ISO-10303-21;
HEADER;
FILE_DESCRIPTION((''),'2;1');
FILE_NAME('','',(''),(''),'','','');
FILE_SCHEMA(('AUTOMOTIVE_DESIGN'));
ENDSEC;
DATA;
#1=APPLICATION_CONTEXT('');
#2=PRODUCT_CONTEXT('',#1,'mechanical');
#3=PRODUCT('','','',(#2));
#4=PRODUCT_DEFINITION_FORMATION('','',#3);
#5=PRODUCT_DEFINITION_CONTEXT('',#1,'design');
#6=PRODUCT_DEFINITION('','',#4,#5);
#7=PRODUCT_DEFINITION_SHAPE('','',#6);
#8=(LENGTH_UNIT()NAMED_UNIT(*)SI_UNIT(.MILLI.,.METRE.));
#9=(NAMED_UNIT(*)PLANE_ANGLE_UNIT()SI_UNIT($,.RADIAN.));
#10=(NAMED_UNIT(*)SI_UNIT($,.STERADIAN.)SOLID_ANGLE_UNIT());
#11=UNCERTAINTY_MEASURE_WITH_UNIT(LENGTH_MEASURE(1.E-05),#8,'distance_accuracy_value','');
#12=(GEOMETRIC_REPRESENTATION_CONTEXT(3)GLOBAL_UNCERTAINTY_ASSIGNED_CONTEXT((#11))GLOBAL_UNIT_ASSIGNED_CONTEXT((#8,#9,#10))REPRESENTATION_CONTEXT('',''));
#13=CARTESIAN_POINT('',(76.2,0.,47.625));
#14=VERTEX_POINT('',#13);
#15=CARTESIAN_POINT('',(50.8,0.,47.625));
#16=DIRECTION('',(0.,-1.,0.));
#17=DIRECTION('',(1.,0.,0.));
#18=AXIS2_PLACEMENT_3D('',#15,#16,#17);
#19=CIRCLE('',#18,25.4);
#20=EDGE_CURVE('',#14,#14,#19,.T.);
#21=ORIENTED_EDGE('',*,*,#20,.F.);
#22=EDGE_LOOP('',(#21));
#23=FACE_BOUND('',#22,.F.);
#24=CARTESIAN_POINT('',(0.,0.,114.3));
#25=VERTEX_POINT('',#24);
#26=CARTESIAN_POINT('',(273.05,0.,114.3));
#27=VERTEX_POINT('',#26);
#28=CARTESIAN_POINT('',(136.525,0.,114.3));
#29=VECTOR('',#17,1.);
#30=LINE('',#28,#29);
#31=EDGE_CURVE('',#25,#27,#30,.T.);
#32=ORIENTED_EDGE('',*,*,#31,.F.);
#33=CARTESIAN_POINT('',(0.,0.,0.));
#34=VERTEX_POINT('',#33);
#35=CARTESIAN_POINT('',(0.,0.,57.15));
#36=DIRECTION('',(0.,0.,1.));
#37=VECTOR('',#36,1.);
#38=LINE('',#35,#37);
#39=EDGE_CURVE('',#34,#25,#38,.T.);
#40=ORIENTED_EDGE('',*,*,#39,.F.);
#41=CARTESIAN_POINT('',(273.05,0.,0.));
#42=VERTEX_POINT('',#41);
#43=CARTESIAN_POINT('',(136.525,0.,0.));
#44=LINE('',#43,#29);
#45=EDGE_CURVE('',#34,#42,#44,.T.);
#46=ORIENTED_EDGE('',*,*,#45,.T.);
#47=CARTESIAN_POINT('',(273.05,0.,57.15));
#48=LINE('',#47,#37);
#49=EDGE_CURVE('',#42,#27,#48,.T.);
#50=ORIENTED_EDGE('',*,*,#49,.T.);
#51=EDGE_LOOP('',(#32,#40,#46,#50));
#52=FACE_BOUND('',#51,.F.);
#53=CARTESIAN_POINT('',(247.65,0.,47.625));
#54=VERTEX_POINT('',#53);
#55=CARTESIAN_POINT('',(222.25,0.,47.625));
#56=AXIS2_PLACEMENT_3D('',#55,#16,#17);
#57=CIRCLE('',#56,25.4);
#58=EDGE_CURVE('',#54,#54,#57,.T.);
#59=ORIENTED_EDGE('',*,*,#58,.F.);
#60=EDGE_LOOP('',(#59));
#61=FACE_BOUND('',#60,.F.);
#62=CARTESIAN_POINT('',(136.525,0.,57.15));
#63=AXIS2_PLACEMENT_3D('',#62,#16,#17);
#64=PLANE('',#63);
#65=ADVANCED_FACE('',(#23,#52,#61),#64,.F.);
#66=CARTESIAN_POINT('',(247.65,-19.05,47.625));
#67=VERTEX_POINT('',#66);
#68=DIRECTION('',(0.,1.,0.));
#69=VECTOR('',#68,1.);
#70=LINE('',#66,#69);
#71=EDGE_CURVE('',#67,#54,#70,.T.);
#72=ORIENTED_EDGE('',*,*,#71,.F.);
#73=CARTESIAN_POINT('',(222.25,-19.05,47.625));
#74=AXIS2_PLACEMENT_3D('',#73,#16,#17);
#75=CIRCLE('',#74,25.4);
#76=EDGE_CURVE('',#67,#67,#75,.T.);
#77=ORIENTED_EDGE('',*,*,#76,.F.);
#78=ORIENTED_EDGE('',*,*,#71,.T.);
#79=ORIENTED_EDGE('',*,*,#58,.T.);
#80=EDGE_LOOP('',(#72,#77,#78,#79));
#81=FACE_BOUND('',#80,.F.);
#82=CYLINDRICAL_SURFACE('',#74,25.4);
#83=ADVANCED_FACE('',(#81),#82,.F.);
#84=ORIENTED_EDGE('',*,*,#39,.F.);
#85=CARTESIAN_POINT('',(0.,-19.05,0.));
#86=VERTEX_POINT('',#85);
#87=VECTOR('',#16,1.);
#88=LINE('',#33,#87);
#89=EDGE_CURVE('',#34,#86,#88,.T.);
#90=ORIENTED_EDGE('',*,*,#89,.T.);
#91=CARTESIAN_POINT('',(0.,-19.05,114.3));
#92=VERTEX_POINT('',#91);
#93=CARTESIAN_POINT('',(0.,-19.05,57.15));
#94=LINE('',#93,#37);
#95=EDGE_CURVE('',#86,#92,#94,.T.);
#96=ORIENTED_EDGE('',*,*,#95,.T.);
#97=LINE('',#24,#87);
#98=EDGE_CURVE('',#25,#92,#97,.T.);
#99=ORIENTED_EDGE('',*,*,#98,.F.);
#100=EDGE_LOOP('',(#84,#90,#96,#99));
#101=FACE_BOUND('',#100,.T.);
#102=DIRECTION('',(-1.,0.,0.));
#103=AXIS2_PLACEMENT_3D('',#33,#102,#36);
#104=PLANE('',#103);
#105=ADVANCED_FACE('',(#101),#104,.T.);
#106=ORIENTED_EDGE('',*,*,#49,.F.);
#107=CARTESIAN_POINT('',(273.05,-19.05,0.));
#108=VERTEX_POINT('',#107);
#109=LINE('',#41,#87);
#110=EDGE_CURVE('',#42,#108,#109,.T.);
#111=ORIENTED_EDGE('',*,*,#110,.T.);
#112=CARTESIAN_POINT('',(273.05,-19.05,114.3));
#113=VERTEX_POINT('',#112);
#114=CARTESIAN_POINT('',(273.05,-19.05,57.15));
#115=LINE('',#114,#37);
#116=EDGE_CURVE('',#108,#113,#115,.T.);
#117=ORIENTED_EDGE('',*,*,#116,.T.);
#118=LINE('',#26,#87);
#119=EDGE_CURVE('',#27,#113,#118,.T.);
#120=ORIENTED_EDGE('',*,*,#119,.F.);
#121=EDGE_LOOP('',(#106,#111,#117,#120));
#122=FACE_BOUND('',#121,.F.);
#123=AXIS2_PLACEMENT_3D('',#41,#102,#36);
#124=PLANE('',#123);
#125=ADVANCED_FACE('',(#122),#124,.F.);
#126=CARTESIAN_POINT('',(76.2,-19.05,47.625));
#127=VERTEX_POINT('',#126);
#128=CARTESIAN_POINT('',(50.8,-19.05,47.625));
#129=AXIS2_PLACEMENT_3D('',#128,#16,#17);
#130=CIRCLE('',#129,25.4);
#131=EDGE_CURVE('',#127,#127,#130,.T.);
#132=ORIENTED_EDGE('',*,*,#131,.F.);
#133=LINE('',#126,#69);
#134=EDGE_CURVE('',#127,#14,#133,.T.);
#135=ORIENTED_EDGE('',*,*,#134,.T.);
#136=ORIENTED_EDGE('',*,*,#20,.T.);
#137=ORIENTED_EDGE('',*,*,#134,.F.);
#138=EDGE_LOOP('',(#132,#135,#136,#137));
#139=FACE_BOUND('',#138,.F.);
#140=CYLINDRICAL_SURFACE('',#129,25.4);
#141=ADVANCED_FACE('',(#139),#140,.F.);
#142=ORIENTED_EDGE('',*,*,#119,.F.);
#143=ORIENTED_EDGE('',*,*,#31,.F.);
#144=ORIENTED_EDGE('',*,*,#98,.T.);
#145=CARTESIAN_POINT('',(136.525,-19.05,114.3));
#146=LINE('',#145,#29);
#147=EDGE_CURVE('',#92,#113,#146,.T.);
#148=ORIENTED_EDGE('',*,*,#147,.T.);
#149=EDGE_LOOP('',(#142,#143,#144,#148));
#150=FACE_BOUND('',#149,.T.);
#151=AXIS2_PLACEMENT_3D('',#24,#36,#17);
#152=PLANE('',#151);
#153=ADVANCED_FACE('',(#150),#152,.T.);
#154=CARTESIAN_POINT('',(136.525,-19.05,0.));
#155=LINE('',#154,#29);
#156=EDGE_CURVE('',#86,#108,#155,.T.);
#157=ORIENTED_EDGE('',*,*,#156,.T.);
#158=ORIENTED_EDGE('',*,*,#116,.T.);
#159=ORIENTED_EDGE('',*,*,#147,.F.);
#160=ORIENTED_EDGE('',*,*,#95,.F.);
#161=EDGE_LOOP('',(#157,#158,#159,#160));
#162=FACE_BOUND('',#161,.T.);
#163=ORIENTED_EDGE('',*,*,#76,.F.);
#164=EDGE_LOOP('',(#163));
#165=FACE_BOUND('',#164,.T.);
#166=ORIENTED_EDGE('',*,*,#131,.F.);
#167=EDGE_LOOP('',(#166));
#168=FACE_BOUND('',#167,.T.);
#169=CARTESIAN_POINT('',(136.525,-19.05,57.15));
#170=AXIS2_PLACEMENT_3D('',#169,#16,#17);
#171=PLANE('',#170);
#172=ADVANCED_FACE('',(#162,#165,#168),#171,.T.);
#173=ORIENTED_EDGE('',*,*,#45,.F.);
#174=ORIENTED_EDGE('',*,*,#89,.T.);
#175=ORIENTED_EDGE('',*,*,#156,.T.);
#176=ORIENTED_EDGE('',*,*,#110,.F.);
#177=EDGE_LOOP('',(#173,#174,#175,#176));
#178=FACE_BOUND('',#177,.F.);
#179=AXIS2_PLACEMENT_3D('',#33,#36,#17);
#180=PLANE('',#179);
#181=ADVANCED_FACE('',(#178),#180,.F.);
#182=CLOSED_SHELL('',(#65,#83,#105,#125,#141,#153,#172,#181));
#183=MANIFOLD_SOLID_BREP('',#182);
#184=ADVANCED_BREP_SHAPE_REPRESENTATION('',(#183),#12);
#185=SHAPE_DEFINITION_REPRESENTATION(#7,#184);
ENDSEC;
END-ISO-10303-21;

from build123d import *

# Parameters (mm, degrees)
F0_W     = 273.05
F0_H     = 114.3
F1_DEPTH = 19.05
F2_R     = 25.4
F3_DEPTH = 25.4


# Not quite as in the source:
# - a feature names something its author has since deleted; it is built from what else it names


with BuildPart() as f1:
    # F0 (on Front) → F1 (new body)
    with BuildSketch(Plane.XZ):
        with Locations((136.525, 57.15)):
            Rectangle(F0_W, F0_H)
    extrude(amount=F1_DEPTH)

    # F2 (on face) → F3 (cut)
    with BuildSketch(Plane.XZ.offset(19.05)):
        with Locations((50.8, 47.625)):
            Circle(F2_R)
        with Locations((222.25, 47.625)):
            Circle(F2_R)
    extrude(amount=-F3_DEPTH, mode=Mode.SUBTRACT)


solid = f1.part
